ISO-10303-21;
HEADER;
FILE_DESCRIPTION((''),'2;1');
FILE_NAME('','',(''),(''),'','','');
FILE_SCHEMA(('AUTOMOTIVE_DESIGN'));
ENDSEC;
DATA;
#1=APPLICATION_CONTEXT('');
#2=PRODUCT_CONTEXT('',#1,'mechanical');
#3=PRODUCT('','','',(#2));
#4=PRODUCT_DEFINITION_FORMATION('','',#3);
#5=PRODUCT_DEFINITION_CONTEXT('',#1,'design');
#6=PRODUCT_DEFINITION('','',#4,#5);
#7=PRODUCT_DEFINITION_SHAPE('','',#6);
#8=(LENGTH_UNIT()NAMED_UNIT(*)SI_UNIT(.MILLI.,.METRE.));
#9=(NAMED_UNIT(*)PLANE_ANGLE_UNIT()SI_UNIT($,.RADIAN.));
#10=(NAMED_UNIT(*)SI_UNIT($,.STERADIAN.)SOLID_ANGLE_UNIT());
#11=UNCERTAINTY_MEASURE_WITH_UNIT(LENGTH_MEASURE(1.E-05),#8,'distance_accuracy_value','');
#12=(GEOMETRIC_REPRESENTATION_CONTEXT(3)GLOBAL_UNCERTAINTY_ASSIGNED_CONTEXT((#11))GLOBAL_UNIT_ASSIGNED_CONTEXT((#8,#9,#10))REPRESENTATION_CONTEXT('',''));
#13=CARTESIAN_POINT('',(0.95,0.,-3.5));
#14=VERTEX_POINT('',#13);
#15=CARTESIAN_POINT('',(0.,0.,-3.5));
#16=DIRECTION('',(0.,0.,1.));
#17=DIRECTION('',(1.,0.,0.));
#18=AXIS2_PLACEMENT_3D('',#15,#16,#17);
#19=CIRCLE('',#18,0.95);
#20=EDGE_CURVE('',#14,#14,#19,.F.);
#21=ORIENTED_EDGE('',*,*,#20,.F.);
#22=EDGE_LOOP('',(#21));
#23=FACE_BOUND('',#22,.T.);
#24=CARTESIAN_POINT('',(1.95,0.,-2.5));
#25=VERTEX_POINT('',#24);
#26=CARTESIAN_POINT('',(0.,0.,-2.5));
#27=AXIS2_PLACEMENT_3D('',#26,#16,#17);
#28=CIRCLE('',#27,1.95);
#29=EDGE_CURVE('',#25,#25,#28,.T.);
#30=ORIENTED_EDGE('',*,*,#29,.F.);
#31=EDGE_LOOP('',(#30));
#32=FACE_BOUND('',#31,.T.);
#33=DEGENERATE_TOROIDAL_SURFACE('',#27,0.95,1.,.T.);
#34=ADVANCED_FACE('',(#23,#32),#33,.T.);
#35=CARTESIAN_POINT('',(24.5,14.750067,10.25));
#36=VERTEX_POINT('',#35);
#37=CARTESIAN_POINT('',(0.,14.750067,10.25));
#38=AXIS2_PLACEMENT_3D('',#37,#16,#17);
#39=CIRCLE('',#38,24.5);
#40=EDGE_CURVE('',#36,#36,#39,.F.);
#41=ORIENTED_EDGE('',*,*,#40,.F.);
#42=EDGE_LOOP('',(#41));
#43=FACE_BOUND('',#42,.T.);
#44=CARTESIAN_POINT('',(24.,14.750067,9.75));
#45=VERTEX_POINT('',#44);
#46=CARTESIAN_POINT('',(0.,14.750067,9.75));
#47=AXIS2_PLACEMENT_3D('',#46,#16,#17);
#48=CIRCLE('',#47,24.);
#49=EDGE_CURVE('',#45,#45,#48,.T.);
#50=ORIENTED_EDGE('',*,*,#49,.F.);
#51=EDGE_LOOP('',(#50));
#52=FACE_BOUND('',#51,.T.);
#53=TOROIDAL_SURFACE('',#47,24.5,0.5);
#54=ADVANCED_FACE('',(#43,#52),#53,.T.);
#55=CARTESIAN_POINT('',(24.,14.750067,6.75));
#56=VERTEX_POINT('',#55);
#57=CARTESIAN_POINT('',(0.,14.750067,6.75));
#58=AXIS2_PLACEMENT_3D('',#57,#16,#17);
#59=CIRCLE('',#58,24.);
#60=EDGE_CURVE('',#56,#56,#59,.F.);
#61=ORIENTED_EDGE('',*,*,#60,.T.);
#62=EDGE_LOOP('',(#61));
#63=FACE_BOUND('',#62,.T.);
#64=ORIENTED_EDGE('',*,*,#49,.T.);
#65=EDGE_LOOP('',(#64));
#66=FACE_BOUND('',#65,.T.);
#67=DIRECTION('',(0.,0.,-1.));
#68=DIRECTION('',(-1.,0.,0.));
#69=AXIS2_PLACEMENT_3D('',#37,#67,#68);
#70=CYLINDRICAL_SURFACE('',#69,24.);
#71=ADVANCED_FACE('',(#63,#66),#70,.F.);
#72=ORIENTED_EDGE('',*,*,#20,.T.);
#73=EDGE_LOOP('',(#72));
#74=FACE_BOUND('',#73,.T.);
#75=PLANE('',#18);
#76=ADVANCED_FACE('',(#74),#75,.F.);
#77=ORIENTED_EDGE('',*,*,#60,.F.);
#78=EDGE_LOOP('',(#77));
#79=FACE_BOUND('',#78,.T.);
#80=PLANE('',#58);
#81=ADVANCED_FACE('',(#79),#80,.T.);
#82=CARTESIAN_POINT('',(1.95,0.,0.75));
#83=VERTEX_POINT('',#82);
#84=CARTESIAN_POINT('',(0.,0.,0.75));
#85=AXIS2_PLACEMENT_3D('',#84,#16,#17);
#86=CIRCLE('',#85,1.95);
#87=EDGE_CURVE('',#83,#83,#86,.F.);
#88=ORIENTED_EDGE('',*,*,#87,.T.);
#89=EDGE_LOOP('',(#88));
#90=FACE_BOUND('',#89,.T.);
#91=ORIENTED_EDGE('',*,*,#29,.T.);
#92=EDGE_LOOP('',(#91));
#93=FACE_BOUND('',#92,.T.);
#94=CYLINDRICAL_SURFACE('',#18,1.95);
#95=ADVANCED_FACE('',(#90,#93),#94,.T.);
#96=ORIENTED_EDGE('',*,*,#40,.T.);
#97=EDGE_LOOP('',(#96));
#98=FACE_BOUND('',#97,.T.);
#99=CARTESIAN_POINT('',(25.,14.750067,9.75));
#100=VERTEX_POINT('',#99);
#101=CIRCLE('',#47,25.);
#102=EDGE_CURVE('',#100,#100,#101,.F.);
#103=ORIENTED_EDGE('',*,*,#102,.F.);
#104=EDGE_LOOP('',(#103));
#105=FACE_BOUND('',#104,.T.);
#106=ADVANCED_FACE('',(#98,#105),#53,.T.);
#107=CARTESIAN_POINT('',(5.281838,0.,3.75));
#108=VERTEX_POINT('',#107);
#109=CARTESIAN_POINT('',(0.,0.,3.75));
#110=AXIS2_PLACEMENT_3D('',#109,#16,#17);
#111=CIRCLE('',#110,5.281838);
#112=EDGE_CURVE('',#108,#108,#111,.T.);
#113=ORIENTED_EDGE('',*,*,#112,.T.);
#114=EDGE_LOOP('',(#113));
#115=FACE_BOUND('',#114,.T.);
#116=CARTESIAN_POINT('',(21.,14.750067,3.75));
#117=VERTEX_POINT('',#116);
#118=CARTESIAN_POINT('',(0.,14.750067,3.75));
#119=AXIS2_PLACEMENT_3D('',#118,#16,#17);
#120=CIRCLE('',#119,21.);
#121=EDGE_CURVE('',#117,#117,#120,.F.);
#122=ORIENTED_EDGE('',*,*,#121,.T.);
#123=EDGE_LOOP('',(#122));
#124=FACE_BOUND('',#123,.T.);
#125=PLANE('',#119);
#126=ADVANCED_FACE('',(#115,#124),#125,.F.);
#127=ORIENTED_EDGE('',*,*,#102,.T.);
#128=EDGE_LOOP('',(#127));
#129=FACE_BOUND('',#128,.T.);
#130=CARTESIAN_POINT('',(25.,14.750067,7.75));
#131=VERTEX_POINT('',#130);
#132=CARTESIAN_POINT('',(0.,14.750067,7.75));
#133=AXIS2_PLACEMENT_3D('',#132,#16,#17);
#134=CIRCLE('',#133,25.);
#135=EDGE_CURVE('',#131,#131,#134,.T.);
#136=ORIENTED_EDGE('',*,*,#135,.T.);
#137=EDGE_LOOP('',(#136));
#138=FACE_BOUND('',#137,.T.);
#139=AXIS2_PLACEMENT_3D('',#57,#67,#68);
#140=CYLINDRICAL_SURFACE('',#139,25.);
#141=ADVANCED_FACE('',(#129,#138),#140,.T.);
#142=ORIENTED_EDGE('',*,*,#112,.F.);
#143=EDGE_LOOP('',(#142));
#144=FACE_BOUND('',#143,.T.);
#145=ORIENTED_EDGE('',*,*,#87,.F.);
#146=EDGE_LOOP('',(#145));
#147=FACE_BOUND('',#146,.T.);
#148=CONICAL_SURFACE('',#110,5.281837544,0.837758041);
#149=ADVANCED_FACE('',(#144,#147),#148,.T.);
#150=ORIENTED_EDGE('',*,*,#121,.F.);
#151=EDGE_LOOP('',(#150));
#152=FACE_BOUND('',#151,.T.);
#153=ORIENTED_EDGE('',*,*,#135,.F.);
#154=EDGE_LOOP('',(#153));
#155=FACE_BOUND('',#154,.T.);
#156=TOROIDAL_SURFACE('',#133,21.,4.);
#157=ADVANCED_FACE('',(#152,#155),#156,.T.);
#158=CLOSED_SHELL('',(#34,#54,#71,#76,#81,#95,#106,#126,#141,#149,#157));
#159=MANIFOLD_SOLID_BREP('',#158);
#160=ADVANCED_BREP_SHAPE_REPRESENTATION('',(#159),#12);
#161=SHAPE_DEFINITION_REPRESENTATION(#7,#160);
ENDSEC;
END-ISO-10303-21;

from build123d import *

# Parameters (mm, degrees)
BOSS_EXTRUDE1_DEPTH      = 3.75
BOSS_EXTRUDE1_DEPTH_BACK = 3.5
SKETCH1_R                = 1.95
SKETCH2_R                = 25
BOSS_EXTRUDE2_DEPTH      = 3
SKETCH3_R                = 25
SKETCH3_R_2              = 24
BOSS_EXTRUDE3_DEPTH      = 3.5
FILLET1_R                = 0.5
FILLET2_R                = 4
CHAMFER1_SIZE            = 3
CHAMFER1_SIZE2           = 3.331837544
FILLET3_R                = 1


with BuildPart() as part:
    # Sketch1 → Boss-Extrude1 (new, two sides: drawn at the far end of the back side and taken through both)
    with BuildSketch(Plane.XY.offset(-BOSS_EXTRUDE1_DEPTH_BACK)):
        Circle(SKETCH1_R)
    extrude(amount=BOSS_EXTRUDE1_DEPTH + BOSS_EXTRUDE1_DEPTH_BACK)

    # Sketch2 → Boss-Extrude2 (add)
    with BuildSketch(Plane.XY.offset(3.75)):
        with Locations((0, 14.750067334)):
            Circle(SKETCH2_R)
    extrude(amount=BOSS_EXTRUDE2_DEPTH)

    # Sketch3 → Boss-Extrude3 (add)
    with BuildSketch(Plane.XY.offset(6.75)):
        with Locations((0, 14.750067334)):
            Circle(SKETCH3_R)
        with Locations((0, 14.750067334)):
            Circle(SKETCH3_R_2, mode=Mode.SUBTRACT)
    extrude(amount=BOSS_EXTRUDE3_DEPTH)

    # Fillet1
    fillet1_edges = [part.edges().sort_by_distance(p)[0] for p in [
        (-25, 14.750067334, 10.25),
        (-24, 14.750067334, 10.25),
    ]]
    fillet(fillet1_edges, radius=FILLET1_R - 0.0001)  # a hair under: the kernel refuses the full size

    # Fillet2
    fillet2_edges = [part.edges().sort_by_distance(p)[0] for p in [
        (-25, 14.750067334, 3.75),
    ]]
    fillet(fillet2_edges, radius=FILLET2_R)

    # Chamfer1
    chamfer1_edges = [part.edges().sort_by_distance(p)[0] for p in [
        (-1.95, 0, 3.75),
    ]]
    chamfer1_side = [part.faces().sort_by_distance(p)[0] for p in [
        (-1.95, 0, 1.875),
    ]]
    chamfer(chamfer1_edges, length=CHAMFER1_SIZE, length2=CHAMFER1_SIZE2, reference=chamfer1_side[0])

    # Fillet3
    fillet3_edges = [part.edges().sort_by_distance(p)[0] for p in [
        (-1.95, 0, -3.5),
    ]]
    fillet(fillet3_edges, radius=FILLET3_R)


solid = part.part
